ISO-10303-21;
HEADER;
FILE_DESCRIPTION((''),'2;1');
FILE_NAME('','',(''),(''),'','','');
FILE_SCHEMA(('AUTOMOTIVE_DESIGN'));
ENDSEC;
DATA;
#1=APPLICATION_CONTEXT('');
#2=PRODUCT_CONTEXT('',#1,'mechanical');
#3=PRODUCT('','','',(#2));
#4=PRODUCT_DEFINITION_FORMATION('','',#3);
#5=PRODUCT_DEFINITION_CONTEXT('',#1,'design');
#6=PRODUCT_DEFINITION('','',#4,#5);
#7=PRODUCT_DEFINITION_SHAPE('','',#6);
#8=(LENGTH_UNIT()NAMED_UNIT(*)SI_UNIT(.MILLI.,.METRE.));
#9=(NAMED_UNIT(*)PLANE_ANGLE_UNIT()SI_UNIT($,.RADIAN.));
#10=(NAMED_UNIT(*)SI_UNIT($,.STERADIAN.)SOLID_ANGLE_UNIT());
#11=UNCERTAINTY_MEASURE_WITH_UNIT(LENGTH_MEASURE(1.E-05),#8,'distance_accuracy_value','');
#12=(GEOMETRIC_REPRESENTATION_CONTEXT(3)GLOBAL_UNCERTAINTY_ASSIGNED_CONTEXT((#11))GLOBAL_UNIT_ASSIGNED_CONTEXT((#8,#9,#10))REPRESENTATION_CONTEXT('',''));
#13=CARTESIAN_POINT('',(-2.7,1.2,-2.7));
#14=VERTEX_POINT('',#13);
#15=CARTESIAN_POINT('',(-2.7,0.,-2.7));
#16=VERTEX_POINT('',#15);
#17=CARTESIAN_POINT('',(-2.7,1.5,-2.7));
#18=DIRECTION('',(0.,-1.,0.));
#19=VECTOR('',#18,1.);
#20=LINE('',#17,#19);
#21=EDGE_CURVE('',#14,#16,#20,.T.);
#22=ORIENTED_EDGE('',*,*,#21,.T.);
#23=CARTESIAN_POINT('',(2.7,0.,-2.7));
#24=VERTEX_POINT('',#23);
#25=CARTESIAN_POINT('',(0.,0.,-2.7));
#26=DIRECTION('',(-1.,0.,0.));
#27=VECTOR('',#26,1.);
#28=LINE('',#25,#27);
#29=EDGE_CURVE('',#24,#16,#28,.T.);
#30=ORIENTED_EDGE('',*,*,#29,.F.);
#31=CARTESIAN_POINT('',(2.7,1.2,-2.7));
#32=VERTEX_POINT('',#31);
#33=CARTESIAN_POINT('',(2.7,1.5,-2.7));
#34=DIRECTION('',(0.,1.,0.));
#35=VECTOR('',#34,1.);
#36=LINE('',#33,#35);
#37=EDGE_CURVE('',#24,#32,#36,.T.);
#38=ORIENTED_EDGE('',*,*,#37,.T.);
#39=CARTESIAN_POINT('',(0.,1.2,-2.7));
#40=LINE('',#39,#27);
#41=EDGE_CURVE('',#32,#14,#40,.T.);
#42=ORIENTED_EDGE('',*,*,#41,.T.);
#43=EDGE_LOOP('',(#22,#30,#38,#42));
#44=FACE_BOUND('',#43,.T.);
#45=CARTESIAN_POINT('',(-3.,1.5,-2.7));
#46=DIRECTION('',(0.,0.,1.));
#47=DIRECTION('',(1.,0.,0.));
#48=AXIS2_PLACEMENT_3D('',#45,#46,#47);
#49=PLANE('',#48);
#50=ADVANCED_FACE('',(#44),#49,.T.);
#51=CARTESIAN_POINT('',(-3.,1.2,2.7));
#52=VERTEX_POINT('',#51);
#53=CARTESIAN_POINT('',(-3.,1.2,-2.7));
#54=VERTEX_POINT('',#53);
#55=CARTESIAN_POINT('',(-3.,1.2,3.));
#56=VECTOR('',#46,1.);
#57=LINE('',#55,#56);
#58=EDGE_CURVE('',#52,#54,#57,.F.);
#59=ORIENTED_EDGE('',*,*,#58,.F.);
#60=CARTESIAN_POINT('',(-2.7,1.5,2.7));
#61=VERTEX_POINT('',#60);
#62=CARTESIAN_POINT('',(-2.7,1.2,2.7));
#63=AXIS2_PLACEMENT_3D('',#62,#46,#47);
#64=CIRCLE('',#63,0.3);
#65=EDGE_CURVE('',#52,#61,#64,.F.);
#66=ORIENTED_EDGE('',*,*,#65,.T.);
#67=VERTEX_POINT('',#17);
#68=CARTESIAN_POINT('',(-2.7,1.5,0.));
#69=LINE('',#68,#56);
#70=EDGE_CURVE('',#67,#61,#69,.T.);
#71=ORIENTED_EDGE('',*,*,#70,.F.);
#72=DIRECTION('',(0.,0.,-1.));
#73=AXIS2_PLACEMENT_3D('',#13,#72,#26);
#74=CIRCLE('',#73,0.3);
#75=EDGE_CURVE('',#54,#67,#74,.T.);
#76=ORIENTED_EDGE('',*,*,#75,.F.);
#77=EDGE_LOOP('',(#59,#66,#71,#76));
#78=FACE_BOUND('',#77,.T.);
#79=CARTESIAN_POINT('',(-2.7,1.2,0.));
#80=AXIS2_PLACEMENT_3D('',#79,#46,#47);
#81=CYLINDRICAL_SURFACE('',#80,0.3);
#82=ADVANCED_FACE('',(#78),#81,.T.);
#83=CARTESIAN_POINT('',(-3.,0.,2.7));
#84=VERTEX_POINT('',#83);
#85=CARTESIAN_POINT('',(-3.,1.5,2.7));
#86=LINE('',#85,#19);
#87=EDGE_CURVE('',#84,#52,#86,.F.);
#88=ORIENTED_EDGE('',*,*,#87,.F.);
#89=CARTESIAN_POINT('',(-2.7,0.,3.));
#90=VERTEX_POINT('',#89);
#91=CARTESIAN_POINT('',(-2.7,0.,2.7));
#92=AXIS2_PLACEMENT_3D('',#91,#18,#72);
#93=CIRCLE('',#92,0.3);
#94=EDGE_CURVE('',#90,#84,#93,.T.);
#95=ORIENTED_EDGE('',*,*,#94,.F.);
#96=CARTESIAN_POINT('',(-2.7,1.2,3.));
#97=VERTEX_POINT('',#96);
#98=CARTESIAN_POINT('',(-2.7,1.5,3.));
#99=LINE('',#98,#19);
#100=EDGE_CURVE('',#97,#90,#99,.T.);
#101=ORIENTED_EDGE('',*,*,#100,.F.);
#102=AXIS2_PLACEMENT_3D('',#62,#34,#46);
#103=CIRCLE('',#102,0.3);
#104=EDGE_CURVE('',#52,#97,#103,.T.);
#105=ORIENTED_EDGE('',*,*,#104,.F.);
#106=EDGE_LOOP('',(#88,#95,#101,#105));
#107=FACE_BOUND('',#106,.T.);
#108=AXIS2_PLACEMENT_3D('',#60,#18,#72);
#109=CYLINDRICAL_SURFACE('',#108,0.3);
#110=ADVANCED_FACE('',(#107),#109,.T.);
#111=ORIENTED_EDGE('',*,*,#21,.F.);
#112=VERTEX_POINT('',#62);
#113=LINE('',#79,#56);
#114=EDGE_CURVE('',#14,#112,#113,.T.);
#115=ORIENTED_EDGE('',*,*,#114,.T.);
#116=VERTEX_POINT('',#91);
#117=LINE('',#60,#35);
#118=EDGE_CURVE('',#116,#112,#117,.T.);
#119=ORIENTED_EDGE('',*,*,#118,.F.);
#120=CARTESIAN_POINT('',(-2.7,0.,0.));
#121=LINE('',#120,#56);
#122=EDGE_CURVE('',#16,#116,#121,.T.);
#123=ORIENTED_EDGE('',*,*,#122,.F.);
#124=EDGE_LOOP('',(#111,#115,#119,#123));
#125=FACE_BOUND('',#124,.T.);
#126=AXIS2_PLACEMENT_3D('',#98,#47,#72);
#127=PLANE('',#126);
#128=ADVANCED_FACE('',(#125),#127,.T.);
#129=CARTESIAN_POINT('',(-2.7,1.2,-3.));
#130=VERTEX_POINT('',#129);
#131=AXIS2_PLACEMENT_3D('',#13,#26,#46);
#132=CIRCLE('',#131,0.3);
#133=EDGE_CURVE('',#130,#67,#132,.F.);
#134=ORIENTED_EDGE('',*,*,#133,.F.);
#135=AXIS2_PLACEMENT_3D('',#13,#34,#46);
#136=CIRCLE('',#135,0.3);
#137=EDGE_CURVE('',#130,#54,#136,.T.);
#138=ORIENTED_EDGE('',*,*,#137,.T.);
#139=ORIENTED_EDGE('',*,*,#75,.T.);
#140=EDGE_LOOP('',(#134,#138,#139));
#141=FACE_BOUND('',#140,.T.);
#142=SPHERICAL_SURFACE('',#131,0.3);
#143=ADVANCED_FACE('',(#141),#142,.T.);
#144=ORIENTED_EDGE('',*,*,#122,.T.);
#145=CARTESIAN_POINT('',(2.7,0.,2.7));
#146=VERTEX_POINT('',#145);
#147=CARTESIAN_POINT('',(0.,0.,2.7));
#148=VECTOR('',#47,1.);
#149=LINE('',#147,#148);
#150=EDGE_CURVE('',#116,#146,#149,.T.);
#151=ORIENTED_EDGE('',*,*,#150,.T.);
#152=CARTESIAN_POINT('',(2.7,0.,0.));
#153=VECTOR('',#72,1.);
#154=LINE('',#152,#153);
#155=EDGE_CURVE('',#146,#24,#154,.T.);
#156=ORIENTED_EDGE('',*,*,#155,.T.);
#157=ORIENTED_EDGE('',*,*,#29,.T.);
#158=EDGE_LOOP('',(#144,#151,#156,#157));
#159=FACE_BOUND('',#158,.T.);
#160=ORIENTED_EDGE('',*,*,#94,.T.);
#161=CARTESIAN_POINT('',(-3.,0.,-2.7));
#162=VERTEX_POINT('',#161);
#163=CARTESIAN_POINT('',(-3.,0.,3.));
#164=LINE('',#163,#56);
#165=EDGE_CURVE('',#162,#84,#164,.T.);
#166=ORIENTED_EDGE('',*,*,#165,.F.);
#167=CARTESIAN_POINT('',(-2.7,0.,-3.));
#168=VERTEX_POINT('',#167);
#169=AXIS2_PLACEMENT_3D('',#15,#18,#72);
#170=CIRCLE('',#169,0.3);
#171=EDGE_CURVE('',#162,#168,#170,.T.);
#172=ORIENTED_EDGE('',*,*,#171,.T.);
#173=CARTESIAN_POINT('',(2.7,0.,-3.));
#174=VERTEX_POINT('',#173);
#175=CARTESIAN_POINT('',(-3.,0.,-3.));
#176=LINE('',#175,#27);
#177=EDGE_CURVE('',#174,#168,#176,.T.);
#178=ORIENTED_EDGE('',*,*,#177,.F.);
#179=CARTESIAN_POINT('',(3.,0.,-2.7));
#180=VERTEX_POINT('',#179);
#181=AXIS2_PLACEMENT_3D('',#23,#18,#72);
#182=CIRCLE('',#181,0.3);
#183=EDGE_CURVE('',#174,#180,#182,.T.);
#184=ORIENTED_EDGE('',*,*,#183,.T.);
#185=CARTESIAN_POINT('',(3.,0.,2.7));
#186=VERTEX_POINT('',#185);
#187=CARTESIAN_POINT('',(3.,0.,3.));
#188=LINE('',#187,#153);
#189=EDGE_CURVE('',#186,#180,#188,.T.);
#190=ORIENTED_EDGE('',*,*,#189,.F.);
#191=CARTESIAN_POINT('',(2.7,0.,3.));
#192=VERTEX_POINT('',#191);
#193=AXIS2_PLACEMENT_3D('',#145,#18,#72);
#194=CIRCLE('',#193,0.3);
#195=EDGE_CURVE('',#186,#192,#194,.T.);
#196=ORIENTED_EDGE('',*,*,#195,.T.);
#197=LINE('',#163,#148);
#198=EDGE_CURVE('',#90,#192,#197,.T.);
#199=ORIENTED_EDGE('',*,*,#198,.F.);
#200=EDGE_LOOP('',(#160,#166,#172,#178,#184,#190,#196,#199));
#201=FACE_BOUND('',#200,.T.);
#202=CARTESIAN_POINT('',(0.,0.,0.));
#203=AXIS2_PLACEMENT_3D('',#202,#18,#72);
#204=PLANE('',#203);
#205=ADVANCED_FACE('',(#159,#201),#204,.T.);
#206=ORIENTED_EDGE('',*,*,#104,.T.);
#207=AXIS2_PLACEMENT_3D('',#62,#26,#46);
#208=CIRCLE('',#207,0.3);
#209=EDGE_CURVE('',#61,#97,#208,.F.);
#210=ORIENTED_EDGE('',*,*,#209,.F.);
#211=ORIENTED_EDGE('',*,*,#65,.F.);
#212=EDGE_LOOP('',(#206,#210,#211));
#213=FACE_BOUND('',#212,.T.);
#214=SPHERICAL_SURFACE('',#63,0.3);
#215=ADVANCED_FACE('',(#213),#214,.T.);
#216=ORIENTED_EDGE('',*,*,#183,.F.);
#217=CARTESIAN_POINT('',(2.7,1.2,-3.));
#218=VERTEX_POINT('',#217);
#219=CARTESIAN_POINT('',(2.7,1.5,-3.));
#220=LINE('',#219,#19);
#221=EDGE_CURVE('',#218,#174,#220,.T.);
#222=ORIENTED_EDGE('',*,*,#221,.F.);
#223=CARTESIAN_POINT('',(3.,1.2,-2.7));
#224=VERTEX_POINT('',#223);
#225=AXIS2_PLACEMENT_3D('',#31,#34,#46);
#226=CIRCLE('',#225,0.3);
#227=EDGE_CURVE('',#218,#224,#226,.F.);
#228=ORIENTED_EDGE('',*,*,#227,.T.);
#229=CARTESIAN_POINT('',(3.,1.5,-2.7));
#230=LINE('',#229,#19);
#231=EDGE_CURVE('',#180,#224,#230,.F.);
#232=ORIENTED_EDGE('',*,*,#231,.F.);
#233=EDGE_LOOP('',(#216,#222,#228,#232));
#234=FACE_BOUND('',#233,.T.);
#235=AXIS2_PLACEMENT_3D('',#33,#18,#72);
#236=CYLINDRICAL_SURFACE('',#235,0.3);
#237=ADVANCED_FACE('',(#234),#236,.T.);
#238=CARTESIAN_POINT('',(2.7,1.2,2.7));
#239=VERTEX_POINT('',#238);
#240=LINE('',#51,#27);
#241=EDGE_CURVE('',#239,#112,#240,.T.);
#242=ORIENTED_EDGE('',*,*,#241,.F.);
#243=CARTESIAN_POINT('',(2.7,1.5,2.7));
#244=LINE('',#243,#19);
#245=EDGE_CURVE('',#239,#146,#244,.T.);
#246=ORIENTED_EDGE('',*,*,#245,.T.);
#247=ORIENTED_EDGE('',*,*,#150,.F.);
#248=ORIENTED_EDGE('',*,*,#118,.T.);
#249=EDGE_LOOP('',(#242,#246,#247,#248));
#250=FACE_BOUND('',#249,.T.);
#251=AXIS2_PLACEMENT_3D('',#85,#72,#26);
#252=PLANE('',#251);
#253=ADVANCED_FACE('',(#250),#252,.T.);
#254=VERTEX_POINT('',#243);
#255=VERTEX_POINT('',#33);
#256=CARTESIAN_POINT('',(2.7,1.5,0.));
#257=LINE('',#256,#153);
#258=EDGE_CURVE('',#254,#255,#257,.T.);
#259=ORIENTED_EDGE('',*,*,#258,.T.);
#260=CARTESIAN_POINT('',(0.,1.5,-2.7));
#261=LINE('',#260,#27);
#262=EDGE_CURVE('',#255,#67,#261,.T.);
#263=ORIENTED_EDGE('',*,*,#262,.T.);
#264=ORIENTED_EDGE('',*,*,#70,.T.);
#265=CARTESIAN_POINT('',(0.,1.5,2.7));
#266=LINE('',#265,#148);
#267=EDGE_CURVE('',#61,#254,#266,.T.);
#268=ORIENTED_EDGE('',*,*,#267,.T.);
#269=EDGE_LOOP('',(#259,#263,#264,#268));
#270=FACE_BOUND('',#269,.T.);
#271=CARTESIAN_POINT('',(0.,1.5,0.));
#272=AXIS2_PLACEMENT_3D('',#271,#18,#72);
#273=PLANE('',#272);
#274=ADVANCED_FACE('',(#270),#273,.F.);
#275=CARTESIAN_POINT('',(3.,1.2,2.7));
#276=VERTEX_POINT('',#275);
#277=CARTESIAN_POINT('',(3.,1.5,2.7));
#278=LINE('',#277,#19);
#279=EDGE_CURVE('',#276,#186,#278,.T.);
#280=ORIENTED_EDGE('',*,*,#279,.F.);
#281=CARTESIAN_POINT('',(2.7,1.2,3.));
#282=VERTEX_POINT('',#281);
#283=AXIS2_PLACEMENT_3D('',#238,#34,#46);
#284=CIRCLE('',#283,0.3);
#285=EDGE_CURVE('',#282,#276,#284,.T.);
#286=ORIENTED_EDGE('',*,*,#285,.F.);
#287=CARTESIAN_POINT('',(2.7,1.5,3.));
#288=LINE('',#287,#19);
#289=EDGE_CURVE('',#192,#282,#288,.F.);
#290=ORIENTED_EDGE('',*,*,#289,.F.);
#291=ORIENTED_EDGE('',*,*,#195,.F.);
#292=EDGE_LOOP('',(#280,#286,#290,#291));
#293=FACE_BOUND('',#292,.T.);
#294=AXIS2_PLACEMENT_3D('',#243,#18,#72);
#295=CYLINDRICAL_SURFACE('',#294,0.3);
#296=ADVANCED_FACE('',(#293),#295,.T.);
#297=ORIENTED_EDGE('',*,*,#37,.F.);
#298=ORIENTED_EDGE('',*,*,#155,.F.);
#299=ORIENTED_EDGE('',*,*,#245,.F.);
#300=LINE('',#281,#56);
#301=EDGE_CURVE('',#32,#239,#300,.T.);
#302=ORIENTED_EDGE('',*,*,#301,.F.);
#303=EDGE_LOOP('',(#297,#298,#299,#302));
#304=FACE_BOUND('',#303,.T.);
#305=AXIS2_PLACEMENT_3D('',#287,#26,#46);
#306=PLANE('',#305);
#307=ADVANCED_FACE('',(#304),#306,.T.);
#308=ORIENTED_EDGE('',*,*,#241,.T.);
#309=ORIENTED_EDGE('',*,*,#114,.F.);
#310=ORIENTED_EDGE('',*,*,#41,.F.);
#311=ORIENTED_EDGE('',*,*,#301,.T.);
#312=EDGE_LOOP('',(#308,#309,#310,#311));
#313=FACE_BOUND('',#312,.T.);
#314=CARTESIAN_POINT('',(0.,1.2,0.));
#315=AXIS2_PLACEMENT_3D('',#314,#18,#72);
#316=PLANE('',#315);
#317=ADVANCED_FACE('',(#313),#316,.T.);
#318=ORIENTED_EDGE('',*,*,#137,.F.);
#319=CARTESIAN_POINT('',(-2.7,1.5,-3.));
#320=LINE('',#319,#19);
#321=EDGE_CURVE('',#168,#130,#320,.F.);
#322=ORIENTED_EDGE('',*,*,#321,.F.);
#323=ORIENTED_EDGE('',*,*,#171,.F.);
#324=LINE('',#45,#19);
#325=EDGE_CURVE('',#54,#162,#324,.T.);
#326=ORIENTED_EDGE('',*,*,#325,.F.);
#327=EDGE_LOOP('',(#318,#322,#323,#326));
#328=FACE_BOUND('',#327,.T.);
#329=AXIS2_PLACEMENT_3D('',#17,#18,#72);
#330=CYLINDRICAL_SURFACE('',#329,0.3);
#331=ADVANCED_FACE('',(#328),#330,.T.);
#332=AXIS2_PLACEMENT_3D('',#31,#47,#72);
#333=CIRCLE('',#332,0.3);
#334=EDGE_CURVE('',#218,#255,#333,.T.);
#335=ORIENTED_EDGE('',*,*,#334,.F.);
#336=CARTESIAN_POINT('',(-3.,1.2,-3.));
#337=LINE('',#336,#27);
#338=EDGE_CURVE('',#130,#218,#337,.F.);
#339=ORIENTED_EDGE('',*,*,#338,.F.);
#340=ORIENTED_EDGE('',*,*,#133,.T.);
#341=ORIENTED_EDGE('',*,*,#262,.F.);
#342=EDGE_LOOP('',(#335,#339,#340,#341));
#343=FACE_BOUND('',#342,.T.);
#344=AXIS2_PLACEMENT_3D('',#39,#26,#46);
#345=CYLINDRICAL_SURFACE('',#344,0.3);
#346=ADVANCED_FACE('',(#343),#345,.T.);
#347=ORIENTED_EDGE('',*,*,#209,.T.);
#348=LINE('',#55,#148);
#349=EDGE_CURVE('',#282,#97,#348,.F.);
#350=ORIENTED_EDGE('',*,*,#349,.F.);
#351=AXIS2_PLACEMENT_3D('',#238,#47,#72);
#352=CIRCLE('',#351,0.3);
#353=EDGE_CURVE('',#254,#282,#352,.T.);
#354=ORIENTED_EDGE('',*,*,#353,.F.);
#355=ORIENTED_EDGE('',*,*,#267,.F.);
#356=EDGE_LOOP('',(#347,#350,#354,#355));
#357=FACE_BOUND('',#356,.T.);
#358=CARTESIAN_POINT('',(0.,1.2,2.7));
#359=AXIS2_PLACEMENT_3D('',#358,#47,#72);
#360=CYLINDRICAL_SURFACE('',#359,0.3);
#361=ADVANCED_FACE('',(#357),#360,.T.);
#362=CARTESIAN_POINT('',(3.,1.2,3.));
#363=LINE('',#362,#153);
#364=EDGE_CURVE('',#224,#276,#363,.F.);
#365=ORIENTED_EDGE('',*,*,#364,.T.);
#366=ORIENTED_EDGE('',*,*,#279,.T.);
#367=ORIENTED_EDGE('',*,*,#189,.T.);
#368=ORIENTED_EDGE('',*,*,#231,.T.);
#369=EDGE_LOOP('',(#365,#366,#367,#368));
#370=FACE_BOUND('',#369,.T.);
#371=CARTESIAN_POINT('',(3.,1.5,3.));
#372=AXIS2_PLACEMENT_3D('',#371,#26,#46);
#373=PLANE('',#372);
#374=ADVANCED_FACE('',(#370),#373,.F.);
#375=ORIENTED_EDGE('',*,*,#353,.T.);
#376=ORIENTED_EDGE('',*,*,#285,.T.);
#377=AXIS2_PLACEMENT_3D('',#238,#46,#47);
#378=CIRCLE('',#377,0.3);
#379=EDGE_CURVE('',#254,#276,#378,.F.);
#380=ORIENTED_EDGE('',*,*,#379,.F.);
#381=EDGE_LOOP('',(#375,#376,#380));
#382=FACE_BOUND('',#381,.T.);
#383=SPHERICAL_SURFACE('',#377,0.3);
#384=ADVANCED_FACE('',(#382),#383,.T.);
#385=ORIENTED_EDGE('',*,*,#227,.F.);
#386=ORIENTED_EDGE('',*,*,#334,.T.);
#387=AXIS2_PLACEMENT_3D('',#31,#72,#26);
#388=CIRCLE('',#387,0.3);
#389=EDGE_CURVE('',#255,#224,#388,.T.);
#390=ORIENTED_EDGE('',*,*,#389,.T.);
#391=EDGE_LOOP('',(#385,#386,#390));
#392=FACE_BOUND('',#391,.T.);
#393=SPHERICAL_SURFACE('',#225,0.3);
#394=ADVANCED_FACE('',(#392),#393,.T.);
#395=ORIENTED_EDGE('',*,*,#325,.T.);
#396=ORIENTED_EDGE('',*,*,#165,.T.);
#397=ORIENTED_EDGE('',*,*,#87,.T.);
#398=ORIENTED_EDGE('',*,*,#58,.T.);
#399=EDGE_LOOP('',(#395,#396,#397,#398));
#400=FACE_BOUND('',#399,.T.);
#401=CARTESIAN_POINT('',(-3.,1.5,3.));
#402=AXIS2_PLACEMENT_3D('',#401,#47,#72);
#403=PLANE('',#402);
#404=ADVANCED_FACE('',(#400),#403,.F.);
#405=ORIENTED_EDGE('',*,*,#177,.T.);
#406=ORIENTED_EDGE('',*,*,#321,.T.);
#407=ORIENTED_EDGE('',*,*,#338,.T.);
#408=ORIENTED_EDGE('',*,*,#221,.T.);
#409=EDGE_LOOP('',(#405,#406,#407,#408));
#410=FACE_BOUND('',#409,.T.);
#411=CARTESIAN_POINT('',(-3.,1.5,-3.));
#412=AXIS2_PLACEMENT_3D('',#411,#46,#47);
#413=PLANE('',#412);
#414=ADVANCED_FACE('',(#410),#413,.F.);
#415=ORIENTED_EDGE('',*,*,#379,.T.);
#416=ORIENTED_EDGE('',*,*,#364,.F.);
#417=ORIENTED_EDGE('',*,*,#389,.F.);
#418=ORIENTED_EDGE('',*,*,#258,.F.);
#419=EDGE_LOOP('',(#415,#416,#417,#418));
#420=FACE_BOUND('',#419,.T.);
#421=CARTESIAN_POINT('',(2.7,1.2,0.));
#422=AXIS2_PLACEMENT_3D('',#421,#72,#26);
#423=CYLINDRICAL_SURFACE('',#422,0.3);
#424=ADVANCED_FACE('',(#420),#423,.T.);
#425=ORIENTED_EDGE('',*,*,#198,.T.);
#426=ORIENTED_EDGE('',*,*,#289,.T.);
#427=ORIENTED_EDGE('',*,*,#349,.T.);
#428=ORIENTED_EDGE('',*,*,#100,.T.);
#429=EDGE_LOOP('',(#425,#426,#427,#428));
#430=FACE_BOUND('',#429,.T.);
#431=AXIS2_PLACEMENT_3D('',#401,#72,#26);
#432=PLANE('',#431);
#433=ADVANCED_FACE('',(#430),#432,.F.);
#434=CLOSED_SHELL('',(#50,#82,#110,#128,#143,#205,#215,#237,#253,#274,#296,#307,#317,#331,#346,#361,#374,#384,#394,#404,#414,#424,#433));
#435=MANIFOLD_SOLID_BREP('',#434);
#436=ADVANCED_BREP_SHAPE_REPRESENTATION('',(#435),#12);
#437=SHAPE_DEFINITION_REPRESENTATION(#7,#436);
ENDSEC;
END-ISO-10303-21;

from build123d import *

# Parameters (mm, degrees)
SKETCH1_W           = 6
SKETCH1_H           = 6
BOSS_EXTRUDE1_DEPTH = 1.5
FILLET1_R           = 0.3
SHELL1_START        = -2.7
SHELL1_OUTLINE_W    = 1.2
SHELL1_OUTLINE_H    = 5.4
SHELL1_DEPTH        = 5.4


# Read off the part's stored shape, not the designer's step: Shell1
with BuildPart() as part:
    # Sketch1 → Boss-Extrude1 (new body)
    with BuildSketch(Plane(origin=(0, 0, 0), x_dir=(1, 0, 0), z_dir=(0, 1, 0))):
        Rectangle(SKETCH1_W, SKETCH1_H)
    extrude(amount=BOSS_EXTRUDE1_DEPTH)

    # Fillet1
    fillet1_edges = [part.edges().sort_by_distance(p)[0] for p in [
        (-3, 1.5, 0),
        (0, 1.5, 3),
        (3, 1.5, 0),
        (3, 0.75, 3),
        (-3, 0.75, 3),
        (-3, 0.75, -3),
        (3, 0.75, -3),
        (0, 1.5, -3),
    ]]
    fillet(fillet1_edges, radius=FILLET1_R)

    # Shell1 outline → Shell1 (cut)
    with BuildSketch(Plane.YZ.offset(SHELL1_START)):
        with Locations((0.6, 0)):
            Rectangle(SHELL1_OUTLINE_W, SHELL1_OUTLINE_H)
    extrude(amount=SHELL1_DEPTH, mode=Mode.SUBTRACT)


solid = part.part
